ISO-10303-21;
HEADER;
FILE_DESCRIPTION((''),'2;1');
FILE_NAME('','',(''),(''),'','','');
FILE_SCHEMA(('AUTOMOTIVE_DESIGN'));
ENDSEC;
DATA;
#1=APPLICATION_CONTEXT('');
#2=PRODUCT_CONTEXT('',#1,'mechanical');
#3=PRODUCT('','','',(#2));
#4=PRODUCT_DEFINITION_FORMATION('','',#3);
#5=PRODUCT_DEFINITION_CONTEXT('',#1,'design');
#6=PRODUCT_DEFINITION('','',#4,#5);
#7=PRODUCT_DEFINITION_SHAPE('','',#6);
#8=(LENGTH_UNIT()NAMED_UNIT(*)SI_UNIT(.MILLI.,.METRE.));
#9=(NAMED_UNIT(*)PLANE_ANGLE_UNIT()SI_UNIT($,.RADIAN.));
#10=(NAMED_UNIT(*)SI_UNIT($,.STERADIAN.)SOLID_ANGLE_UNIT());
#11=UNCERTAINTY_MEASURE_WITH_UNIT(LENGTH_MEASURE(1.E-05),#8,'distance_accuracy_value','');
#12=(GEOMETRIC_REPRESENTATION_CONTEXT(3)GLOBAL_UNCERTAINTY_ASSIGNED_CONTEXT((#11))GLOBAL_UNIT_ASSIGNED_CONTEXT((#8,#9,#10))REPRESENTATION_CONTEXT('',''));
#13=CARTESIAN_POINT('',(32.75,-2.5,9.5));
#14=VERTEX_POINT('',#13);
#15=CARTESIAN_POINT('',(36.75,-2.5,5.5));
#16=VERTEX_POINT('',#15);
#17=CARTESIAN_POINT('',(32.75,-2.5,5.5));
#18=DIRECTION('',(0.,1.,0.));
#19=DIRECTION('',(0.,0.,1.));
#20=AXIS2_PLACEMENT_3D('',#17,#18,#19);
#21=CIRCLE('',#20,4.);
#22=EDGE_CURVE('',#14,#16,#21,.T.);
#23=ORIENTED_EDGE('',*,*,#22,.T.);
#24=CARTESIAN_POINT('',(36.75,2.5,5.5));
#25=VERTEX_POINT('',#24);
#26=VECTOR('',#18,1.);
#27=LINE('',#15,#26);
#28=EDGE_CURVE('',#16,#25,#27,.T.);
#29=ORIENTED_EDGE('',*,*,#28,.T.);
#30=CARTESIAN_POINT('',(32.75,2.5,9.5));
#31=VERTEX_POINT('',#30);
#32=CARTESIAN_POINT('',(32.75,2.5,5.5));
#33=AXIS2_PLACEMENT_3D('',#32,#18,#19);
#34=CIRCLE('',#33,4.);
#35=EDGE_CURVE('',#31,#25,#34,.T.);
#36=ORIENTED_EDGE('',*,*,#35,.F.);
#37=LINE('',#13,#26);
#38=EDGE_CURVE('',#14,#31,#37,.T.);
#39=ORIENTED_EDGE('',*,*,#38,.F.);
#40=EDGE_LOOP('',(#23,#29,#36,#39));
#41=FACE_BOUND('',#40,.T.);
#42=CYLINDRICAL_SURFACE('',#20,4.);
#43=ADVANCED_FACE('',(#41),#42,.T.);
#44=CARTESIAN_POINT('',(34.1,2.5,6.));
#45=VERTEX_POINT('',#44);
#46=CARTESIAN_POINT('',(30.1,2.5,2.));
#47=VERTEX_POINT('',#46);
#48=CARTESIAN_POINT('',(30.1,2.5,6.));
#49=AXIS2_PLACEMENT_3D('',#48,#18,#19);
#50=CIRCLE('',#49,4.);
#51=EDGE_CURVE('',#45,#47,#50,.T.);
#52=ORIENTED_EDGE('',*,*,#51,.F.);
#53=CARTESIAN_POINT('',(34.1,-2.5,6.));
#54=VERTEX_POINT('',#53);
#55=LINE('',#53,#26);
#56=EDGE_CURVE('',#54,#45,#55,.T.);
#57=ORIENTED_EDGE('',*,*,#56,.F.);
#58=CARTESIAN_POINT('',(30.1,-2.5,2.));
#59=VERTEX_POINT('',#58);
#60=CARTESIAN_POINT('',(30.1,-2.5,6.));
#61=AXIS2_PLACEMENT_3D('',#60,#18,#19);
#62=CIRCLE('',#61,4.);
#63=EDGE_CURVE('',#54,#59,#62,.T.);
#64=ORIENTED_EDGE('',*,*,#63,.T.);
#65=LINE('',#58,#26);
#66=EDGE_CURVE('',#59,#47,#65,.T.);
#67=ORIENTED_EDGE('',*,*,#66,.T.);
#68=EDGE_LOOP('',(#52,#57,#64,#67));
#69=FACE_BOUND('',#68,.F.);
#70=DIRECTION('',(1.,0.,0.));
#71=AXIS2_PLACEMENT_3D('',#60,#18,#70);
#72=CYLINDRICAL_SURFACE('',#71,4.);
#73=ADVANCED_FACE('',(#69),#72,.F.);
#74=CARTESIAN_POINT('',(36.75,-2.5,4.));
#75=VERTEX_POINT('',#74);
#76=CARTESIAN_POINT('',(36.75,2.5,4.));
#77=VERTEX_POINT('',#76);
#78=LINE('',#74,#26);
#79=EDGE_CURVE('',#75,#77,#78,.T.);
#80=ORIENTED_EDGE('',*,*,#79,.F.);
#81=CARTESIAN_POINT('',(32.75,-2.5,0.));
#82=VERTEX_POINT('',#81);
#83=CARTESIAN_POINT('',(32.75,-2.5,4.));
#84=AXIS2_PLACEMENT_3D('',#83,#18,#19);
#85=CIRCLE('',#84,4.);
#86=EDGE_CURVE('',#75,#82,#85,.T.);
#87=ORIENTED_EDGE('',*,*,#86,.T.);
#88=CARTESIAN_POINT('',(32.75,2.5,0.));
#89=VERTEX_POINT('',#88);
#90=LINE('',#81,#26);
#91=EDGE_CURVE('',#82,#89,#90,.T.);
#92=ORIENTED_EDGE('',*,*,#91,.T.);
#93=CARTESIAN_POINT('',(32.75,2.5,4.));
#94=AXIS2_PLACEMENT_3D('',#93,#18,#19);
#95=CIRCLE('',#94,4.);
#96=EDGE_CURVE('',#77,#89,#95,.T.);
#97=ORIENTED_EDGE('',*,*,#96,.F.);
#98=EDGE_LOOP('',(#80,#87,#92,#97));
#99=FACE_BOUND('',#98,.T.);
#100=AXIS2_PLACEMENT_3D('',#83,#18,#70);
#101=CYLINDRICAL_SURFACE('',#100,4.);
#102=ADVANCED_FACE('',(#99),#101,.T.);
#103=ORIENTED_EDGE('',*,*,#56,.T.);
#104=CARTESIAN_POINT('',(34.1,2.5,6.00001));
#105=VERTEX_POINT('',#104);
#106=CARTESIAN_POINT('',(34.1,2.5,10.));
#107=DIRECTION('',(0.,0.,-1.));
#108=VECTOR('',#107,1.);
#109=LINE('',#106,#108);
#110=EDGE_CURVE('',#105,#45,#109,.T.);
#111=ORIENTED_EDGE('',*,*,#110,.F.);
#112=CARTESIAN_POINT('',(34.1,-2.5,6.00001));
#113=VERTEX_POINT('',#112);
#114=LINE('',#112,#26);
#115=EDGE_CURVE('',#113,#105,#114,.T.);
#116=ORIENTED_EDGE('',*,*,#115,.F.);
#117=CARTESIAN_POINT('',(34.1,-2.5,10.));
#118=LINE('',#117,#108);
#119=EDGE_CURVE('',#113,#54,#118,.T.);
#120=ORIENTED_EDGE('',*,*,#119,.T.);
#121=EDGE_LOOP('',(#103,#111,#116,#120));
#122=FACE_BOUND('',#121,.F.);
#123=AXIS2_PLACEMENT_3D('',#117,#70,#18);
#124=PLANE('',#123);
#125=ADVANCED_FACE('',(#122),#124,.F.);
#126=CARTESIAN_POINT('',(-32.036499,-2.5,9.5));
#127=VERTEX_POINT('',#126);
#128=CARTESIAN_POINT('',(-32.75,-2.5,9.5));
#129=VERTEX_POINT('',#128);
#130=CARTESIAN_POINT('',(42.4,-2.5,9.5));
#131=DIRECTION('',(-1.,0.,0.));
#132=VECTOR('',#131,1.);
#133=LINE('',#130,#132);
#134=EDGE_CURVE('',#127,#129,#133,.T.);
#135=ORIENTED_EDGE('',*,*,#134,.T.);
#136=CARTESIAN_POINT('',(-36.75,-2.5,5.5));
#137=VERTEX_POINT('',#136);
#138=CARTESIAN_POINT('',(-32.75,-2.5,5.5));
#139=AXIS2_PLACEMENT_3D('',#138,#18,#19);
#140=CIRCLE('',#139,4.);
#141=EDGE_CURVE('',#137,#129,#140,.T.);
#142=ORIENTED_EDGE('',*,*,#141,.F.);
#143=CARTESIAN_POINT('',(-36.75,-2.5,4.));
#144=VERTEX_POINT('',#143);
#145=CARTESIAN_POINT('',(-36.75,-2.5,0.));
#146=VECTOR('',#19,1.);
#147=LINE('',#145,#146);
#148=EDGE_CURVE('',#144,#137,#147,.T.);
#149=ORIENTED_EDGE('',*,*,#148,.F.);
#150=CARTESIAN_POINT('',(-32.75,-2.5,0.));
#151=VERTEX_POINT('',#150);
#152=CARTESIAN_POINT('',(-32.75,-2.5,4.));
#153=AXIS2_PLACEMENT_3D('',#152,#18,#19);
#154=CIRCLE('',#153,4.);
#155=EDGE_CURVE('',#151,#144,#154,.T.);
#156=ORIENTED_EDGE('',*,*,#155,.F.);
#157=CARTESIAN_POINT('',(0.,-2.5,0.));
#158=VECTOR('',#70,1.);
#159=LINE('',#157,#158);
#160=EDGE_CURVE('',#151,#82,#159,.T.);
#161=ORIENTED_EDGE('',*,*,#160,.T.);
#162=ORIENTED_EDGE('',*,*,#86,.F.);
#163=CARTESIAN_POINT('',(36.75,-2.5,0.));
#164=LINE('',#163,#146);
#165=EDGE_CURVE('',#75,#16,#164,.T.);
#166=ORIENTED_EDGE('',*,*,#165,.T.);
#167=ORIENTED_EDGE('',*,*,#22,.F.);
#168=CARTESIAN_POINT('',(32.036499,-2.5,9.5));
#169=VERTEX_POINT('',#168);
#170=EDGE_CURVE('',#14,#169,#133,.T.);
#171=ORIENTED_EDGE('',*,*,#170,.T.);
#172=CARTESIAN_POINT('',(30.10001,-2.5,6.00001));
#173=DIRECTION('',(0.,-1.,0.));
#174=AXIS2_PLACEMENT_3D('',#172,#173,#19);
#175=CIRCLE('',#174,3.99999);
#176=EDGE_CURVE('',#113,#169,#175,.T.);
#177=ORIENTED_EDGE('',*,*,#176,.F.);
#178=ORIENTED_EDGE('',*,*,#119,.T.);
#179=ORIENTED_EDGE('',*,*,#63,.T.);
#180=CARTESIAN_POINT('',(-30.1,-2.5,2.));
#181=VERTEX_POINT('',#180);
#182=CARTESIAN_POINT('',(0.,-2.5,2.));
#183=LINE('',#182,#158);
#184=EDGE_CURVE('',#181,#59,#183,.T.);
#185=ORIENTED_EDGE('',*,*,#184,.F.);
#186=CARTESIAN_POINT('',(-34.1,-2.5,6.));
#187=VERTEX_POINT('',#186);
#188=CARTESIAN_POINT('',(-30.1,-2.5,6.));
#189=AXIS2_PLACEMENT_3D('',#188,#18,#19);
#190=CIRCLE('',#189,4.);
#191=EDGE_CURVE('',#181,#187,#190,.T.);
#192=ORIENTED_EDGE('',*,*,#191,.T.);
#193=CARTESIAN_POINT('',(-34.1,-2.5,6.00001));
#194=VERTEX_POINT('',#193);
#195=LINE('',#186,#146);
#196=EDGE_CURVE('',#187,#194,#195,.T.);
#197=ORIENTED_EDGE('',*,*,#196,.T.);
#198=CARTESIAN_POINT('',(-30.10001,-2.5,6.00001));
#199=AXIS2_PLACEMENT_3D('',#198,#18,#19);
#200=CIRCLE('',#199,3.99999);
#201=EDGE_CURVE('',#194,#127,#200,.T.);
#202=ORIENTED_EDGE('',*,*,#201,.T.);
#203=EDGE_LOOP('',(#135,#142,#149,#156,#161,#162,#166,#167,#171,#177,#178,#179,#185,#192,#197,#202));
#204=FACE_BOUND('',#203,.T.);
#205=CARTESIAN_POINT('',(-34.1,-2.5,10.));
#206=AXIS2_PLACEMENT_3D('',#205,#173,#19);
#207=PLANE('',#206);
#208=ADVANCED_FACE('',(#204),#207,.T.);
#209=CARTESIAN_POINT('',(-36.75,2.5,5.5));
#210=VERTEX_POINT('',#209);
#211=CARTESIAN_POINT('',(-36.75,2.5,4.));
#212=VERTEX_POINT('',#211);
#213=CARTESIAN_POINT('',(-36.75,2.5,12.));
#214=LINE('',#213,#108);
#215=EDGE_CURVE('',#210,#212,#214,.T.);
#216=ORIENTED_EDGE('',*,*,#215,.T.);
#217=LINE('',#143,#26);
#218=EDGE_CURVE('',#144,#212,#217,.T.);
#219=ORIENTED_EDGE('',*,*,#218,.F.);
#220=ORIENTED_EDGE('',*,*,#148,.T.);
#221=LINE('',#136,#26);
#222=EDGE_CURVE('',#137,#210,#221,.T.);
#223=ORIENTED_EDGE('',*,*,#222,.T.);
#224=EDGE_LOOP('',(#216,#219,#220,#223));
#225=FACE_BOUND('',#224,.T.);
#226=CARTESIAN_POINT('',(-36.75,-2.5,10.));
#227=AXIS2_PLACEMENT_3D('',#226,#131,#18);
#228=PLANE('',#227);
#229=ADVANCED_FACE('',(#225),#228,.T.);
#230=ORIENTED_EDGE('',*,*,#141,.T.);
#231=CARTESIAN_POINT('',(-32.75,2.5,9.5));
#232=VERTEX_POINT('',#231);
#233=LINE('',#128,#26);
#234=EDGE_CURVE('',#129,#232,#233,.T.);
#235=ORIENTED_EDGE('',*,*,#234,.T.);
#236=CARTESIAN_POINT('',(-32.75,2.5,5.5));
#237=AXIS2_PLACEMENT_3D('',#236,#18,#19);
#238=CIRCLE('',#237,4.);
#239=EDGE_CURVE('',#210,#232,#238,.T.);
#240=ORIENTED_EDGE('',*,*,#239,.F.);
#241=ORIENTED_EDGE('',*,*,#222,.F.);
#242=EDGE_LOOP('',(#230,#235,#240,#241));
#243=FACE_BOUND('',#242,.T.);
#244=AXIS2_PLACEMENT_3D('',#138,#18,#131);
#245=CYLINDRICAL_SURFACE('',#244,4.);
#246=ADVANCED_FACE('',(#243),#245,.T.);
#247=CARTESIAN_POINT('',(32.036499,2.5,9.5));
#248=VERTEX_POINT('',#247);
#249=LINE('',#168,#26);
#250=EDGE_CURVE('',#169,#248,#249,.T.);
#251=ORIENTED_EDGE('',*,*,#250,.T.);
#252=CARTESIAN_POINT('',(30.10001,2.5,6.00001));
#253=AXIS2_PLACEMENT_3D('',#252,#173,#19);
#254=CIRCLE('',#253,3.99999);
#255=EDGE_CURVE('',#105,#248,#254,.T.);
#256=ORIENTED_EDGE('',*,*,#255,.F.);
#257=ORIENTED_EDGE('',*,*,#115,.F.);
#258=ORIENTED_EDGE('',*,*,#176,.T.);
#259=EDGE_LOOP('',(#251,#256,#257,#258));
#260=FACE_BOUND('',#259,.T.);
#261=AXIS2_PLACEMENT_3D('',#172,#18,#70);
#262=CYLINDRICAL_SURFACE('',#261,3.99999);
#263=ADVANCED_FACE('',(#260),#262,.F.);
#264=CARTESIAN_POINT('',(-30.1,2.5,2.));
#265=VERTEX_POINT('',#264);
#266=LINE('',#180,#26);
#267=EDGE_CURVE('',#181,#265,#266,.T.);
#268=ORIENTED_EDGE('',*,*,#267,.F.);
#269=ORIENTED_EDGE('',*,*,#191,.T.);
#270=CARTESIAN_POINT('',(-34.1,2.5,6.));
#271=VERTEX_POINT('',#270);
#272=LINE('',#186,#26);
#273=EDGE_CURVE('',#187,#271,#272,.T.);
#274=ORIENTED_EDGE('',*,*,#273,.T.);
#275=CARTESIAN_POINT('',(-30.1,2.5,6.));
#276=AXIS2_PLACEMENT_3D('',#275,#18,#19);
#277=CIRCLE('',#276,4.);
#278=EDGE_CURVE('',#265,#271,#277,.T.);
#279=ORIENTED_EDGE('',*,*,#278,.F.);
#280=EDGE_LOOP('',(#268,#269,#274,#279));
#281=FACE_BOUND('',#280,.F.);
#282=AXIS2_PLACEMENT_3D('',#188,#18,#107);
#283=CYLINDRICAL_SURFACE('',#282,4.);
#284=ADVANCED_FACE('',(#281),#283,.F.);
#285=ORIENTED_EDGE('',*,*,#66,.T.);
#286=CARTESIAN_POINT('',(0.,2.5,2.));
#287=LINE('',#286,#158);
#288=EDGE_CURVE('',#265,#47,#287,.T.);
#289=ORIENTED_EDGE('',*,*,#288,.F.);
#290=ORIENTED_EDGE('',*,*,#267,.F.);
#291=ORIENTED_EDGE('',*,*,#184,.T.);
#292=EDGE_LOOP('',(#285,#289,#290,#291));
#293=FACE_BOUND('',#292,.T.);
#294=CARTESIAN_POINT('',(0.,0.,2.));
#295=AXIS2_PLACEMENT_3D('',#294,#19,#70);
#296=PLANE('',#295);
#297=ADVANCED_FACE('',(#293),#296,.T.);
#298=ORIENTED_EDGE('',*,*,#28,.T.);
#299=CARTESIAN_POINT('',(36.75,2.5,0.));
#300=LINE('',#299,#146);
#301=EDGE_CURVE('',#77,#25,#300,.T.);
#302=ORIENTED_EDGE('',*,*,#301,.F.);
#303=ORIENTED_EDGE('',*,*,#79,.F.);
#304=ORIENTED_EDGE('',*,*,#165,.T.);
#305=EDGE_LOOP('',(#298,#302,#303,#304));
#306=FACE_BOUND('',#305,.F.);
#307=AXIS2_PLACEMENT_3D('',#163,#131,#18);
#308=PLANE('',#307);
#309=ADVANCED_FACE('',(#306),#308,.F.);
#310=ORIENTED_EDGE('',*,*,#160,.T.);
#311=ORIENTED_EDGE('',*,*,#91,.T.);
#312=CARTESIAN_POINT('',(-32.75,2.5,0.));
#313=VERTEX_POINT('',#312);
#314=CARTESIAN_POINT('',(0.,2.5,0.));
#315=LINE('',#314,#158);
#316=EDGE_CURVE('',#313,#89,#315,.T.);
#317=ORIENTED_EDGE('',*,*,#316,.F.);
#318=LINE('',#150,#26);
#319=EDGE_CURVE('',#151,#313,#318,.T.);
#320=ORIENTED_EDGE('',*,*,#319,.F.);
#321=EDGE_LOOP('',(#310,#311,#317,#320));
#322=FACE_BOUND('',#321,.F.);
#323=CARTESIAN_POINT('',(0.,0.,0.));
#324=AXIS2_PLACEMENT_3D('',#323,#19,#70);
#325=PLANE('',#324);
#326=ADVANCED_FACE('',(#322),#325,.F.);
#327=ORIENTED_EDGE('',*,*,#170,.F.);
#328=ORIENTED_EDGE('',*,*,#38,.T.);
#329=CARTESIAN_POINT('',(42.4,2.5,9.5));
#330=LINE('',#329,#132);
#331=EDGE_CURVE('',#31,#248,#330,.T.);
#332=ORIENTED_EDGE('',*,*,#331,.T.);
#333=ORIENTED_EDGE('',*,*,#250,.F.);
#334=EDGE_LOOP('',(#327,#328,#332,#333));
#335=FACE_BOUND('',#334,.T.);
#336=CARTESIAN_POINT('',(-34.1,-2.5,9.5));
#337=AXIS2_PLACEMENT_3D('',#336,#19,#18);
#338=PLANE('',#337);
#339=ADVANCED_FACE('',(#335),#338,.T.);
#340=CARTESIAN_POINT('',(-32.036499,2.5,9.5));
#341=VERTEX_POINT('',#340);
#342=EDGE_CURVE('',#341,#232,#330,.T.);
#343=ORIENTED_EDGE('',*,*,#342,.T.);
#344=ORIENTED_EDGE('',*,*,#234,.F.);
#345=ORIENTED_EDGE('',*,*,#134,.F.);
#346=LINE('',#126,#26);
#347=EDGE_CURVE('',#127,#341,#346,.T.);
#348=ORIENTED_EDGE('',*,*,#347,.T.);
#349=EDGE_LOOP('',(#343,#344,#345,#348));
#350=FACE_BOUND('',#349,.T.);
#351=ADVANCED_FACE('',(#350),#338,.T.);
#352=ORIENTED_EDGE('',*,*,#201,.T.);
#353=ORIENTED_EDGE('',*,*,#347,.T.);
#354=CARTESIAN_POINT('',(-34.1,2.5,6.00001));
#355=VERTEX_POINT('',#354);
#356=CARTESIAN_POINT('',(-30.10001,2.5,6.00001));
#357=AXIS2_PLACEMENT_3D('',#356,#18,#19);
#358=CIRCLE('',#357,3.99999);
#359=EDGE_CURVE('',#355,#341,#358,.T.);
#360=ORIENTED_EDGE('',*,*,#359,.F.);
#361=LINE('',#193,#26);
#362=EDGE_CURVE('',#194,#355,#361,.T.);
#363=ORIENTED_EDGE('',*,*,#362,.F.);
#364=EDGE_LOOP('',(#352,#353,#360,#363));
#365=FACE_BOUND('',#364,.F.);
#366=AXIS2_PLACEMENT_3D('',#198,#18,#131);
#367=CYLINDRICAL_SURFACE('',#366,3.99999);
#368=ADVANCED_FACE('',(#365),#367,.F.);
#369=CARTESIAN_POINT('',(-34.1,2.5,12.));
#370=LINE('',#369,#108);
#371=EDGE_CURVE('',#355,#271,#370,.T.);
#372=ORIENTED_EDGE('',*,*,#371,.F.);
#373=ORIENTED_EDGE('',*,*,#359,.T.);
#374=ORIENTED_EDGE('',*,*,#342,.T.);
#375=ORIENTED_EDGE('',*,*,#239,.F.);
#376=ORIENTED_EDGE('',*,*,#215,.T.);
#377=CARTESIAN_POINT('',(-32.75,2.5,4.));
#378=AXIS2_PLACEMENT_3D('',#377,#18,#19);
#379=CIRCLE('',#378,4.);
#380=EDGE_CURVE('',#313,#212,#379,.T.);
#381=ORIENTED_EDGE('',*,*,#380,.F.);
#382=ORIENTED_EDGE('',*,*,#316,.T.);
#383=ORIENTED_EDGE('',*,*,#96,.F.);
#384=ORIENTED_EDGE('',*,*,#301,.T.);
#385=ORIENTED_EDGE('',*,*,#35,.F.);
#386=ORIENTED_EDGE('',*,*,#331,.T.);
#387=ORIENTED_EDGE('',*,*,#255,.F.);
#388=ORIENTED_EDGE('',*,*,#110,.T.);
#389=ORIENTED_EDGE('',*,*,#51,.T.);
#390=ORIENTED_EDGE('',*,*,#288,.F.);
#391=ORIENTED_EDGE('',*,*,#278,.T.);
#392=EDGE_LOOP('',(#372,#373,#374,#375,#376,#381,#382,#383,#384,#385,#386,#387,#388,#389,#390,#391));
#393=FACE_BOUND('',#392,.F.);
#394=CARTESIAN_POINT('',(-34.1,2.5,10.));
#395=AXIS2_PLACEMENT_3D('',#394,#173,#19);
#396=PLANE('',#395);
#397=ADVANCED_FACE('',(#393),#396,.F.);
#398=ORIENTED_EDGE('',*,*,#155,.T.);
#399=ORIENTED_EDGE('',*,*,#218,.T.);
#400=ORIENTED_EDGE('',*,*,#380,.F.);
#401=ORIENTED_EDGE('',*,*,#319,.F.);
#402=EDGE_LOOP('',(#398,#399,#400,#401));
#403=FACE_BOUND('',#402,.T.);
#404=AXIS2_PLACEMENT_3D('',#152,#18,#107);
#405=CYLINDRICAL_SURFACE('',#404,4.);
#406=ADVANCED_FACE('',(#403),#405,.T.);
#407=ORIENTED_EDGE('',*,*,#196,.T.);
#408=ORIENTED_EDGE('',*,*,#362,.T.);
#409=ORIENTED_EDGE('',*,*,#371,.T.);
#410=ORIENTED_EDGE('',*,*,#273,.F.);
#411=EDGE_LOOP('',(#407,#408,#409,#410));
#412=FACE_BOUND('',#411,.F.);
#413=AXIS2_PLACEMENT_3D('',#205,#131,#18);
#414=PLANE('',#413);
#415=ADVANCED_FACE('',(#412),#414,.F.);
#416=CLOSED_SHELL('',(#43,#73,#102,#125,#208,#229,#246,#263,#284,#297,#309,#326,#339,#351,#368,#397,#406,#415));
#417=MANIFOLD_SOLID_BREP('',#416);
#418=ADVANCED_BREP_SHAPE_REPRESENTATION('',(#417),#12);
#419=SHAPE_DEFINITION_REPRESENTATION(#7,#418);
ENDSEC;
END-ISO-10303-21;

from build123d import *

# Parameters (mm, degrees)
F0_W     = 73.5
F0_H     = 5
F1_DEPTH = 10
F2_W     = 68.2
F2_H     = 5
F3_DEPTH = 8
F4_R     = 4
F5_DEPTH = 2
F6_W     = 5
F6_H     = 2
F7_DEPTH = 76.5
F8_R     = 3.99999
F9_DEPTH = 2.5
F10_R    = 4


# Not quite as in the source:
# - a fillet or chamfer is up to 0.001 mm smaller than in the source, because OpenCascade refuses the exact size


with BuildPart() as f1:
    # F0 (on Top) → F1 (new body)
    with BuildSketch(Plane.XY):
        Rectangle(F0_W, F0_H)
    extrude(amount=F1_DEPTH)

    # F2 (on face) → F3 (cut)
    with BuildSketch(Plane.XY.offset(10)):
        Rectangle(F2_W, F2_H)
    extrude(amount=-F3_DEPTH, mode=Mode.SUBTRACT)

    # F4
    f4_edges = [f1.edges().sort_by_distance(p)[0] for p in [
        (34.1, 0, 2),
        (-34.1, 0, 2),
    ]]
    fillet(f4_edges, radius=F4_R)

    # F5 (add): a face of the model
    f5_faces = [f1.faces().sort_by_distance(p)[0] for p in [
        (-35.425, 0, 10),
    ]]
    extrude(f5_faces, amount=F5_DEPTH)

    # F6 (on face) → F7 (join)
    with BuildSketch(Plane.YZ.offset(-34.1)):
        with Locations((0, 11)):
            Rectangle(F6_W, F6_H)
    extrude(amount=F7_DEPTH)

    # F8 (radius 4 in the source; OpenCascade refuses exactly that, so slightly less here)
    f8_edges = [f1.edges().sort_by_distance(p)[0] for p in [
        (-34.1, 0, 10),
        (34.1, 0, 10),
    ]]
    fillet(f8_edges, radius=F8_R)

    # F9 (cut): a face of the model
    f9_faces = [f1.faces().sort_by_distance(p)[0] for p in [
        (2.825, 0, 12),
    ]]
    extrude(f9_faces, amount=-F9_DEPTH, mode=Mode.SUBTRACT)

    # F10
    f10_edges = [f1.edges().sort_by_distance(p)[0] for p in [
        (36.75, 0, 0),
        (-36.75, 0, 9.5),
        (-36.75, 0, 0),
        (36.75, 0, 9.5),
    ]]
    fillet(f10_edges, radius=F10_R)


solid = f1.part
